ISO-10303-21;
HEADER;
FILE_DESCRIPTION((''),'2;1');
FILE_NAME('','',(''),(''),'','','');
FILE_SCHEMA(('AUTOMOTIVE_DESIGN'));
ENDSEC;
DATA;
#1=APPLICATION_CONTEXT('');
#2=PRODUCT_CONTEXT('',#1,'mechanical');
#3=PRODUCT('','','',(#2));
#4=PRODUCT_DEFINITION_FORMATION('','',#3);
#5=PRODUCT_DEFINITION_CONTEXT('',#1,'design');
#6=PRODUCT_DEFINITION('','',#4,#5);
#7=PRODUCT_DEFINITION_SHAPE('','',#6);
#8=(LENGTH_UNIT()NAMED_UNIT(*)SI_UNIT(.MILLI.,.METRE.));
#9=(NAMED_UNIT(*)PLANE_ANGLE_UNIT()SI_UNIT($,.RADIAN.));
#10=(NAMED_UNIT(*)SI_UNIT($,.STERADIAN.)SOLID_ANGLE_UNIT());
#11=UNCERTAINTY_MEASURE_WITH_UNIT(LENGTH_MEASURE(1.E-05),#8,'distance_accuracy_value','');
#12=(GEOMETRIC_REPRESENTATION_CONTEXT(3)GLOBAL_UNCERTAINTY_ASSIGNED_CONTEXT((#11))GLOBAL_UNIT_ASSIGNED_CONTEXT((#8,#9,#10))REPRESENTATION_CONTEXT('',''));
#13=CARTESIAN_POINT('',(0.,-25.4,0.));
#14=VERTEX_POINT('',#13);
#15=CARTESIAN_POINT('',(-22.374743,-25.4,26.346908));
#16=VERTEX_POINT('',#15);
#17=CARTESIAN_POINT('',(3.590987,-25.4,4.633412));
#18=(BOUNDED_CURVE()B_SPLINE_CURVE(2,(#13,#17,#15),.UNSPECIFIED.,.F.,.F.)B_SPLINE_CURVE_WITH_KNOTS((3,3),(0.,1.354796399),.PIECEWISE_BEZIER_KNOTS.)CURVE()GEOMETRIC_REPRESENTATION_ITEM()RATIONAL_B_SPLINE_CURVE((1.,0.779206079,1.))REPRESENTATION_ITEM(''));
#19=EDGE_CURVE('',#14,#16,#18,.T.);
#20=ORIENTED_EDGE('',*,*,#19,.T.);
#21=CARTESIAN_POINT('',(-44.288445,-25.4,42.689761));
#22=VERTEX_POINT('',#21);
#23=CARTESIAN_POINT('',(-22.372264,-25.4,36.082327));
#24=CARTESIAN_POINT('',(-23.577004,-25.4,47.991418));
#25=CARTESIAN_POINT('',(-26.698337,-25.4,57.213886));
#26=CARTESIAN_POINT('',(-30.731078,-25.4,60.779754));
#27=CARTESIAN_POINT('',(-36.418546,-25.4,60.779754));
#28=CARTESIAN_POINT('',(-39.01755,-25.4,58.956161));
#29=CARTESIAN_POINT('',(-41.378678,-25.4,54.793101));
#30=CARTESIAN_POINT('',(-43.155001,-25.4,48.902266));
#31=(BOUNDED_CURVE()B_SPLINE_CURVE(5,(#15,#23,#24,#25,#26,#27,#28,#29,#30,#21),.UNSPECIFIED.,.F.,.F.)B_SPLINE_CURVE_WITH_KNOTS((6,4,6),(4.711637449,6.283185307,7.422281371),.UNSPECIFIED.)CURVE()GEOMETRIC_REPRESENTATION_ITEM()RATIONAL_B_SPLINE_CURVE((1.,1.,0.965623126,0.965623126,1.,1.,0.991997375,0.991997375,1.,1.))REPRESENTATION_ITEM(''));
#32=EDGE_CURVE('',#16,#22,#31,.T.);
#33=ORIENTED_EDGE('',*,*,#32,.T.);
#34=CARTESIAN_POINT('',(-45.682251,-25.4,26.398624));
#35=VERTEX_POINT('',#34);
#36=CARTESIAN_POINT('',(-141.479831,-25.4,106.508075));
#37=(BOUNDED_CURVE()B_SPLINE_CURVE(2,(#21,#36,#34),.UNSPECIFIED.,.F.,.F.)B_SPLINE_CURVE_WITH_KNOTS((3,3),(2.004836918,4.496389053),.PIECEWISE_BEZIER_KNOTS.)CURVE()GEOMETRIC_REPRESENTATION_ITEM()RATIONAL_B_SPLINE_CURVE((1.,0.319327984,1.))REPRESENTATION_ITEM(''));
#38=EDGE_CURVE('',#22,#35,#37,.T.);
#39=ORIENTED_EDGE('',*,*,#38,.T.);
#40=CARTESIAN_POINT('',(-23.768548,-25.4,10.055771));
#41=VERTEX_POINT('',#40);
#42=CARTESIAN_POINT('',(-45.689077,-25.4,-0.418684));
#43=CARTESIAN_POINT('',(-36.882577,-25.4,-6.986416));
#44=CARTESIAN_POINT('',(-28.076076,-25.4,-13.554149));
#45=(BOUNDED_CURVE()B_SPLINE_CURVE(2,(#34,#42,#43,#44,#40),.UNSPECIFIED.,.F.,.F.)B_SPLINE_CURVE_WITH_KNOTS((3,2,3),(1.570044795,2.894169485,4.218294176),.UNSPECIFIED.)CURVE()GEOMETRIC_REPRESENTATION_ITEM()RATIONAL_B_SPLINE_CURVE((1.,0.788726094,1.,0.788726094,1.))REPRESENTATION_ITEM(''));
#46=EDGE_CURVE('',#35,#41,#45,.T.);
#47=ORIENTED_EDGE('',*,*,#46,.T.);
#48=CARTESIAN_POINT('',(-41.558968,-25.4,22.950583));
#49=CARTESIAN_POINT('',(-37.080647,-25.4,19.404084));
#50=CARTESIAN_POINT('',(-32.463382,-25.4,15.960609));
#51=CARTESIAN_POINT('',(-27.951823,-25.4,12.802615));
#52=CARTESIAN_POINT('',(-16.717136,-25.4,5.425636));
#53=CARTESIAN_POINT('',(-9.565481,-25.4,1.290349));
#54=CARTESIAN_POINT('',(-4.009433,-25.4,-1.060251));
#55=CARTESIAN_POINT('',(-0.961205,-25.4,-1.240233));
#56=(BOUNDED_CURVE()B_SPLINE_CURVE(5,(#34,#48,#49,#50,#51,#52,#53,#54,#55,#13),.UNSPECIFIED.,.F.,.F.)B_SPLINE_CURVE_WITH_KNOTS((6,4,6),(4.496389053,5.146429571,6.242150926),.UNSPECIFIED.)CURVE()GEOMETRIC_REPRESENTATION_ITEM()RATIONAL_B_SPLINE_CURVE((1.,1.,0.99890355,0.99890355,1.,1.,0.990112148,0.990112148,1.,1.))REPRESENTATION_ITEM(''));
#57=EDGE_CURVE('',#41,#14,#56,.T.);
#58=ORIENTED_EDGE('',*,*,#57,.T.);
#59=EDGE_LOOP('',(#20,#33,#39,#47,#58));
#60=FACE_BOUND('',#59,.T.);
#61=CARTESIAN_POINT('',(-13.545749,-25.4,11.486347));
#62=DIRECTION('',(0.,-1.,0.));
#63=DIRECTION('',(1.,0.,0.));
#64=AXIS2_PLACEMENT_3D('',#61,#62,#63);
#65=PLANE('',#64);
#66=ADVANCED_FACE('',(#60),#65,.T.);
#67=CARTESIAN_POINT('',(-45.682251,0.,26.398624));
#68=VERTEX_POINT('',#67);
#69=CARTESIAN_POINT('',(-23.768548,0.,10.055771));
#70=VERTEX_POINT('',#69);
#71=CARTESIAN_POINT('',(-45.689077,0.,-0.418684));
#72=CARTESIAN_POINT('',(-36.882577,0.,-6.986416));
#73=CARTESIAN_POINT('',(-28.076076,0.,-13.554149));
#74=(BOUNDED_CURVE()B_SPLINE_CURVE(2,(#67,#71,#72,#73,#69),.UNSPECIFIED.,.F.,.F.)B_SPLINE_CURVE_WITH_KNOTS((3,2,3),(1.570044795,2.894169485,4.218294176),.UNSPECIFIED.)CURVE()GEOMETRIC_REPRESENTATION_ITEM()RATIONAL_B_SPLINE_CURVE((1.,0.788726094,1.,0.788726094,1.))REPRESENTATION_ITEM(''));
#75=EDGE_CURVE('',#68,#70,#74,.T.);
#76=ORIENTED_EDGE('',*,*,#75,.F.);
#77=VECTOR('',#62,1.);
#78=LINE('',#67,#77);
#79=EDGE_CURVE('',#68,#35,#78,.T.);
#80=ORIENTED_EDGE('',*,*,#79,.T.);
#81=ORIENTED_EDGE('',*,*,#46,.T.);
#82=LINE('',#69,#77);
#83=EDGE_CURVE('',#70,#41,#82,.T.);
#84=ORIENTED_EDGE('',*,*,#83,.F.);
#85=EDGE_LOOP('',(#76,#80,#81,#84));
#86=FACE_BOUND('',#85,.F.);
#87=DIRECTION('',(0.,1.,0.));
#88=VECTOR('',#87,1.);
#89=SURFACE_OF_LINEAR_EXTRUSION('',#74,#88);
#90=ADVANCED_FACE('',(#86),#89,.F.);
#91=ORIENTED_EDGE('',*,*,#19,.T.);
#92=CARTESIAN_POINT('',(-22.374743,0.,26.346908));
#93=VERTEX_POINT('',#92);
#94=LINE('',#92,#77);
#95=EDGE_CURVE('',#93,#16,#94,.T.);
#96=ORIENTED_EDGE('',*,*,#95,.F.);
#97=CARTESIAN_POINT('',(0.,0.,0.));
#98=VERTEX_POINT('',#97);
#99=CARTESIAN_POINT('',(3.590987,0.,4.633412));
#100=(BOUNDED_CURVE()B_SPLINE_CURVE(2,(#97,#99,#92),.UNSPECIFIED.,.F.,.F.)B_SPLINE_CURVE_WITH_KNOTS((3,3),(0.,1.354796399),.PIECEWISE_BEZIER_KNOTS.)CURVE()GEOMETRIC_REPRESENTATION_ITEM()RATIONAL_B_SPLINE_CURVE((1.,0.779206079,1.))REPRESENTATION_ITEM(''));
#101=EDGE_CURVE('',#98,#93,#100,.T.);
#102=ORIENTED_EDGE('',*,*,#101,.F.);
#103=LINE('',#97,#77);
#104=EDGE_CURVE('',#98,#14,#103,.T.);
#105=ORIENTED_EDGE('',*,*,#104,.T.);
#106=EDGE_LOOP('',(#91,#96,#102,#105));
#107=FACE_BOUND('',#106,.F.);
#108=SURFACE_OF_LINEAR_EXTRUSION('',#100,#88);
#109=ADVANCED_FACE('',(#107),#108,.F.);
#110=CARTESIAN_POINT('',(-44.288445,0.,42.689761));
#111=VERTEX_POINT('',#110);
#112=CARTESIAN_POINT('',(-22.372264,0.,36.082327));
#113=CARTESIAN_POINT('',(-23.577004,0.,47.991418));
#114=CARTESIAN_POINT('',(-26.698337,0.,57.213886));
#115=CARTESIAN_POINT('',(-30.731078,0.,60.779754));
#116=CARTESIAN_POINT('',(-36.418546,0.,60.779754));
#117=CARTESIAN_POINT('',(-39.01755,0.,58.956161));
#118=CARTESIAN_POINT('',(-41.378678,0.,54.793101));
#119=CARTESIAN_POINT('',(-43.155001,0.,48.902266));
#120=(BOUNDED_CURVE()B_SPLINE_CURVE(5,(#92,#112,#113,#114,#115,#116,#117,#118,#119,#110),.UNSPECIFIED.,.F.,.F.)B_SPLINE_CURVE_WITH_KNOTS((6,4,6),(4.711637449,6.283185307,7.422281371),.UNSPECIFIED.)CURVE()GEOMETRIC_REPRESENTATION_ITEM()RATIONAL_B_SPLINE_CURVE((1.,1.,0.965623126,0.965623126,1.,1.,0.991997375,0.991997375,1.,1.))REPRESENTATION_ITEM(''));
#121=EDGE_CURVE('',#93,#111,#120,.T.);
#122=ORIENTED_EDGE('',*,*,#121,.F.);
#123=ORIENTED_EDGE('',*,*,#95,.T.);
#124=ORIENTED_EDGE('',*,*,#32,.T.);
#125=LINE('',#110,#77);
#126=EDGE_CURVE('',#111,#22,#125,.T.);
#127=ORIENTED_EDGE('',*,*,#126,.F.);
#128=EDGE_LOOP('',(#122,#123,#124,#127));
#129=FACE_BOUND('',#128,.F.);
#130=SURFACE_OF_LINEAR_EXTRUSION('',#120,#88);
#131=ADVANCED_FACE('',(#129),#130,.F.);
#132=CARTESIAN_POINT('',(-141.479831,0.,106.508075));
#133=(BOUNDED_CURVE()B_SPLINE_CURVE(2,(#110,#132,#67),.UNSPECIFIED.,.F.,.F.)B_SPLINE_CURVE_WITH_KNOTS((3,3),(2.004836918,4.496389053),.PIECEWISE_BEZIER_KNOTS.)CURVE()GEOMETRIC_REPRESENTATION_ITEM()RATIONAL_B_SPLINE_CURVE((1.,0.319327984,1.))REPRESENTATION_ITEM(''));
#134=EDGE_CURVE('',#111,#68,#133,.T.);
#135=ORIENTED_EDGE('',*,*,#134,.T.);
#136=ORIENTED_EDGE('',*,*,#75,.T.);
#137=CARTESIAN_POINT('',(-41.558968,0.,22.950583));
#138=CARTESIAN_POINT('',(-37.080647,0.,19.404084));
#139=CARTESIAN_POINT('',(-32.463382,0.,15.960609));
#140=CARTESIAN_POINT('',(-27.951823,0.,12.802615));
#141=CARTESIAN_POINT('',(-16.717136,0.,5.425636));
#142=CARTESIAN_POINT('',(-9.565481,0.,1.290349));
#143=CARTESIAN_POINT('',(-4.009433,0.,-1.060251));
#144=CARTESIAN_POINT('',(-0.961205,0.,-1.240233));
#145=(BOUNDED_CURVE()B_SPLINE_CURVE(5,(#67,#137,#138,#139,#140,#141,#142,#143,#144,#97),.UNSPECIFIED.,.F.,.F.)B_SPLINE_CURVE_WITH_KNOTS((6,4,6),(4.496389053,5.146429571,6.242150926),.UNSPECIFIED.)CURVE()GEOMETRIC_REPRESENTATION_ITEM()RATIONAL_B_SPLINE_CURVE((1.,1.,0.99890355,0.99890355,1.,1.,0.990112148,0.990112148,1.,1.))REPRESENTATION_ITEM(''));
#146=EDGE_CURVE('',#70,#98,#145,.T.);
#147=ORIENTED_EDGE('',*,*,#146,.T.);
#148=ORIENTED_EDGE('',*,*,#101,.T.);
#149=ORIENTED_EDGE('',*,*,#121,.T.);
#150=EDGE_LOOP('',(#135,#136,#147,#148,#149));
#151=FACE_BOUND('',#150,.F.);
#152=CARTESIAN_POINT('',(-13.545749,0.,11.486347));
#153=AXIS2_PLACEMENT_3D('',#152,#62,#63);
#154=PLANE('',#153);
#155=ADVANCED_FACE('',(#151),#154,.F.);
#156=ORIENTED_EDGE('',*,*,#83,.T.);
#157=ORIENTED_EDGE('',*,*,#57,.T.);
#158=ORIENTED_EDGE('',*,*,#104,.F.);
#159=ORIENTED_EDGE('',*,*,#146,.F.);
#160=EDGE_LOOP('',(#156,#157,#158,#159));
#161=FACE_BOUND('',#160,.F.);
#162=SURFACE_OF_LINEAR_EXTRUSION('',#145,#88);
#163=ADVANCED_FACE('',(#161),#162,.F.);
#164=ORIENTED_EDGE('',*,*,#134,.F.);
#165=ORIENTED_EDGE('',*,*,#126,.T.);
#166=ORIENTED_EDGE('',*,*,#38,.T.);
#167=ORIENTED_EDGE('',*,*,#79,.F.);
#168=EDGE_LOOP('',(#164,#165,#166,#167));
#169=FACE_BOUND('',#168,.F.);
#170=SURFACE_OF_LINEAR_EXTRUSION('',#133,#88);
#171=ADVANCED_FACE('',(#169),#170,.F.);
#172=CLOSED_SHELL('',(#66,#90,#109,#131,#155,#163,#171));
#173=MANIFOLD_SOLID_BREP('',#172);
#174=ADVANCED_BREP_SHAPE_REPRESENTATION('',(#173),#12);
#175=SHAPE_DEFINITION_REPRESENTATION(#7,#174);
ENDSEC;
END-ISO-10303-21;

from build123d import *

# Parameters (mm, degrees)
F1_DEPTH = 25.4


with BuildPart() as f1:
    # F0 (on Front) → F1 (new body)
    with BuildSketch(Plane.XZ):
        with BuildLine():
            add(Edge.make_bspline(
                [(-23.7685478879, 10.0557711837), (-2.8513099786, -3.6790146109), (0, 0)],
                knots=[5.1464295715, 5.1464295715, 5.1464295715, 6.2831853072, 6.2831853072, 6.2831853072], degree=2, weights=[1, 0.8427752216, 1]))
            add(Edge.make_bspline(
                [(0, 0), (3.5909872709, 4.6334122688), (-22.3747425204, 26.3469081794)],
                knots=[0, 0, 0, 1.3547963993, 1.3547963993, 1.3547963993], degree=2, weights=[1, 0.779206079, 1]))
            add(Edge.make_bspline(
                [(-23.7685478879, 10.0557711837), (-22.3769478232, 17.6832466322), (-22.3747425204, 26.3469081794)],
                knots=[4.2182941759, 4.2182941759, 4.2182941759, 4.7116374486, 4.7116374486, 4.7116374486], degree=2, weights=[1, 0.9697305037, 1]))
        make_face()
        with BuildLine():
            add(Edge.make_bspline(
                [(-23.7685478879, 10.0557711837), (-22.3769478232, 17.6832466322), (-22.3747425204, 26.3469081794)],
                knots=[4.2182941759, 4.2182941759, 4.2182941759, 4.7116374486, 4.7116374486, 4.7116374486], degree=2, weights=[1, 0.9697305037, 1]))
            add(Edge.make_bspline(
                [(-22.3747425204, 26.3469081794), (-33.252461311, 35.4432557258), (-44.2884452986, 42.6897610607)],
                knots=[1.3547963993, 1.3547963993, 1.3547963993, 2.0048369179, 2.0048369179, 2.0048369179], degree=2, weights=[1, 0.9476442572, 1]))
            add(Edge.make_bspline(
                [(-44.2884452986, 42.6897610607), (-45.6800453633, 35.0622856122), (-45.6822506661, 26.398624065)],
                knots=[1.0767015223, 1.0767015223, 1.0767015223, 1.570044795, 1.570044795, 1.570044795], degree=2, weights=[1, 0.9697305037, 1]))
            add(Edge.make_bspline(
                [(-45.6822506661, 26.398624065), (-34.8045318754, 17.3022765186), (-23.7685478879, 10.0557711837)],
                knots=[4.4963890529, 4.4963890529, 4.4963890529, 5.1464295715, 5.1464295715, 5.1464295715], degree=2, weights=[1, 0.9476442572, 1]))
        make_face()
        with BuildLine():
            add(Edge.make_bspline(
                [(-22.3747425204, 26.3469081794), (-33.252461311, 35.4432557258), (-44.2884452986, 42.6897610607)],
                knots=[1.3547963993, 1.3547963993, 1.3547963993, 2.0048369179, 2.0048369179, 2.0048369179], degree=2, weights=[1, 0.9476442572, 1]))
            add(Edge.make_bspline(
                [(-22.3747425204, 26.3469081794), (-22.3659777675, 60.7797540724), (-34.0284965932, 60.7797540724)],
                knots=[4.7116374486, 4.7116374486, 4.7116374486, 6.2831853072, 6.2831853072, 6.2831853072], degree=2, weights=[1, 0.7068410247, 1]))
            add(Edge.make_bspline(
                [(-34.0284965932, 60.7797540724), (-40.9880039381, 60.7797540724), (-44.2884452986, 42.6897610607)],
                knots=[0, 0, 0, 1.0767015223, 1.0767015223, 1.0767015223], degree=2, weights=[1, 0.8585554476, 1]))
        make_face()
        with BuildLine():
            add(Edge.make_bspline(
                [(-45.6822506661, 26.398624065), (-45.689076912, -0.4186836893), (-36.8825765449, -6.9864162792), (-28.0760761777, -13.554148869), (-23.7685478879, 10.0557711837)],
                knots=[1.570044795, 1.570044795, 1.570044795, 2.8941694854, 2.8941694854, 4.2182941759, 4.2182941759, 4.2182941759], degree=2, weights=[1, 0.7887260938, 1, 0.7887260938, 1]))
            add(Edge.make_bspline(
                [(-45.6822506661, 26.398624065), (-34.8045318754, 17.3022765186), (-23.7685478879, 10.0557711837)],
                knots=[4.4963890529, 4.4963890529, 4.4963890529, 5.1464295715, 5.1464295715, 5.1464295715], degree=2, weights=[1, 0.9476442572, 1]))
        make_face()
        with BuildLine():
            add(Edge.make_bspline(
                [(-44.2884452986, 42.6897610607), (-45.6800453633, 35.0622856122), (-45.6822506661, 26.398624065)],
                knots=[1.0767015223, 1.0767015223, 1.0767015223, 1.570044795, 1.570044795, 1.570044795], degree=2, weights=[1, 0.9697305037, 1]))
            add(Edge.make_bspline(
                [(-44.2884452986, 42.6897610607), (-141.479830545, 106.5080750863), (-45.6822506661, 26.398624065)],
                knots=[2.0048369179, 2.0048369179, 2.0048369179, 4.4963890529, 4.4963890529, 4.4963890529], degree=2, weights=[1, 0.3193279845, 1]))
        make_face()
    extrude(amount=F1_DEPTH)


solid = f1.part
